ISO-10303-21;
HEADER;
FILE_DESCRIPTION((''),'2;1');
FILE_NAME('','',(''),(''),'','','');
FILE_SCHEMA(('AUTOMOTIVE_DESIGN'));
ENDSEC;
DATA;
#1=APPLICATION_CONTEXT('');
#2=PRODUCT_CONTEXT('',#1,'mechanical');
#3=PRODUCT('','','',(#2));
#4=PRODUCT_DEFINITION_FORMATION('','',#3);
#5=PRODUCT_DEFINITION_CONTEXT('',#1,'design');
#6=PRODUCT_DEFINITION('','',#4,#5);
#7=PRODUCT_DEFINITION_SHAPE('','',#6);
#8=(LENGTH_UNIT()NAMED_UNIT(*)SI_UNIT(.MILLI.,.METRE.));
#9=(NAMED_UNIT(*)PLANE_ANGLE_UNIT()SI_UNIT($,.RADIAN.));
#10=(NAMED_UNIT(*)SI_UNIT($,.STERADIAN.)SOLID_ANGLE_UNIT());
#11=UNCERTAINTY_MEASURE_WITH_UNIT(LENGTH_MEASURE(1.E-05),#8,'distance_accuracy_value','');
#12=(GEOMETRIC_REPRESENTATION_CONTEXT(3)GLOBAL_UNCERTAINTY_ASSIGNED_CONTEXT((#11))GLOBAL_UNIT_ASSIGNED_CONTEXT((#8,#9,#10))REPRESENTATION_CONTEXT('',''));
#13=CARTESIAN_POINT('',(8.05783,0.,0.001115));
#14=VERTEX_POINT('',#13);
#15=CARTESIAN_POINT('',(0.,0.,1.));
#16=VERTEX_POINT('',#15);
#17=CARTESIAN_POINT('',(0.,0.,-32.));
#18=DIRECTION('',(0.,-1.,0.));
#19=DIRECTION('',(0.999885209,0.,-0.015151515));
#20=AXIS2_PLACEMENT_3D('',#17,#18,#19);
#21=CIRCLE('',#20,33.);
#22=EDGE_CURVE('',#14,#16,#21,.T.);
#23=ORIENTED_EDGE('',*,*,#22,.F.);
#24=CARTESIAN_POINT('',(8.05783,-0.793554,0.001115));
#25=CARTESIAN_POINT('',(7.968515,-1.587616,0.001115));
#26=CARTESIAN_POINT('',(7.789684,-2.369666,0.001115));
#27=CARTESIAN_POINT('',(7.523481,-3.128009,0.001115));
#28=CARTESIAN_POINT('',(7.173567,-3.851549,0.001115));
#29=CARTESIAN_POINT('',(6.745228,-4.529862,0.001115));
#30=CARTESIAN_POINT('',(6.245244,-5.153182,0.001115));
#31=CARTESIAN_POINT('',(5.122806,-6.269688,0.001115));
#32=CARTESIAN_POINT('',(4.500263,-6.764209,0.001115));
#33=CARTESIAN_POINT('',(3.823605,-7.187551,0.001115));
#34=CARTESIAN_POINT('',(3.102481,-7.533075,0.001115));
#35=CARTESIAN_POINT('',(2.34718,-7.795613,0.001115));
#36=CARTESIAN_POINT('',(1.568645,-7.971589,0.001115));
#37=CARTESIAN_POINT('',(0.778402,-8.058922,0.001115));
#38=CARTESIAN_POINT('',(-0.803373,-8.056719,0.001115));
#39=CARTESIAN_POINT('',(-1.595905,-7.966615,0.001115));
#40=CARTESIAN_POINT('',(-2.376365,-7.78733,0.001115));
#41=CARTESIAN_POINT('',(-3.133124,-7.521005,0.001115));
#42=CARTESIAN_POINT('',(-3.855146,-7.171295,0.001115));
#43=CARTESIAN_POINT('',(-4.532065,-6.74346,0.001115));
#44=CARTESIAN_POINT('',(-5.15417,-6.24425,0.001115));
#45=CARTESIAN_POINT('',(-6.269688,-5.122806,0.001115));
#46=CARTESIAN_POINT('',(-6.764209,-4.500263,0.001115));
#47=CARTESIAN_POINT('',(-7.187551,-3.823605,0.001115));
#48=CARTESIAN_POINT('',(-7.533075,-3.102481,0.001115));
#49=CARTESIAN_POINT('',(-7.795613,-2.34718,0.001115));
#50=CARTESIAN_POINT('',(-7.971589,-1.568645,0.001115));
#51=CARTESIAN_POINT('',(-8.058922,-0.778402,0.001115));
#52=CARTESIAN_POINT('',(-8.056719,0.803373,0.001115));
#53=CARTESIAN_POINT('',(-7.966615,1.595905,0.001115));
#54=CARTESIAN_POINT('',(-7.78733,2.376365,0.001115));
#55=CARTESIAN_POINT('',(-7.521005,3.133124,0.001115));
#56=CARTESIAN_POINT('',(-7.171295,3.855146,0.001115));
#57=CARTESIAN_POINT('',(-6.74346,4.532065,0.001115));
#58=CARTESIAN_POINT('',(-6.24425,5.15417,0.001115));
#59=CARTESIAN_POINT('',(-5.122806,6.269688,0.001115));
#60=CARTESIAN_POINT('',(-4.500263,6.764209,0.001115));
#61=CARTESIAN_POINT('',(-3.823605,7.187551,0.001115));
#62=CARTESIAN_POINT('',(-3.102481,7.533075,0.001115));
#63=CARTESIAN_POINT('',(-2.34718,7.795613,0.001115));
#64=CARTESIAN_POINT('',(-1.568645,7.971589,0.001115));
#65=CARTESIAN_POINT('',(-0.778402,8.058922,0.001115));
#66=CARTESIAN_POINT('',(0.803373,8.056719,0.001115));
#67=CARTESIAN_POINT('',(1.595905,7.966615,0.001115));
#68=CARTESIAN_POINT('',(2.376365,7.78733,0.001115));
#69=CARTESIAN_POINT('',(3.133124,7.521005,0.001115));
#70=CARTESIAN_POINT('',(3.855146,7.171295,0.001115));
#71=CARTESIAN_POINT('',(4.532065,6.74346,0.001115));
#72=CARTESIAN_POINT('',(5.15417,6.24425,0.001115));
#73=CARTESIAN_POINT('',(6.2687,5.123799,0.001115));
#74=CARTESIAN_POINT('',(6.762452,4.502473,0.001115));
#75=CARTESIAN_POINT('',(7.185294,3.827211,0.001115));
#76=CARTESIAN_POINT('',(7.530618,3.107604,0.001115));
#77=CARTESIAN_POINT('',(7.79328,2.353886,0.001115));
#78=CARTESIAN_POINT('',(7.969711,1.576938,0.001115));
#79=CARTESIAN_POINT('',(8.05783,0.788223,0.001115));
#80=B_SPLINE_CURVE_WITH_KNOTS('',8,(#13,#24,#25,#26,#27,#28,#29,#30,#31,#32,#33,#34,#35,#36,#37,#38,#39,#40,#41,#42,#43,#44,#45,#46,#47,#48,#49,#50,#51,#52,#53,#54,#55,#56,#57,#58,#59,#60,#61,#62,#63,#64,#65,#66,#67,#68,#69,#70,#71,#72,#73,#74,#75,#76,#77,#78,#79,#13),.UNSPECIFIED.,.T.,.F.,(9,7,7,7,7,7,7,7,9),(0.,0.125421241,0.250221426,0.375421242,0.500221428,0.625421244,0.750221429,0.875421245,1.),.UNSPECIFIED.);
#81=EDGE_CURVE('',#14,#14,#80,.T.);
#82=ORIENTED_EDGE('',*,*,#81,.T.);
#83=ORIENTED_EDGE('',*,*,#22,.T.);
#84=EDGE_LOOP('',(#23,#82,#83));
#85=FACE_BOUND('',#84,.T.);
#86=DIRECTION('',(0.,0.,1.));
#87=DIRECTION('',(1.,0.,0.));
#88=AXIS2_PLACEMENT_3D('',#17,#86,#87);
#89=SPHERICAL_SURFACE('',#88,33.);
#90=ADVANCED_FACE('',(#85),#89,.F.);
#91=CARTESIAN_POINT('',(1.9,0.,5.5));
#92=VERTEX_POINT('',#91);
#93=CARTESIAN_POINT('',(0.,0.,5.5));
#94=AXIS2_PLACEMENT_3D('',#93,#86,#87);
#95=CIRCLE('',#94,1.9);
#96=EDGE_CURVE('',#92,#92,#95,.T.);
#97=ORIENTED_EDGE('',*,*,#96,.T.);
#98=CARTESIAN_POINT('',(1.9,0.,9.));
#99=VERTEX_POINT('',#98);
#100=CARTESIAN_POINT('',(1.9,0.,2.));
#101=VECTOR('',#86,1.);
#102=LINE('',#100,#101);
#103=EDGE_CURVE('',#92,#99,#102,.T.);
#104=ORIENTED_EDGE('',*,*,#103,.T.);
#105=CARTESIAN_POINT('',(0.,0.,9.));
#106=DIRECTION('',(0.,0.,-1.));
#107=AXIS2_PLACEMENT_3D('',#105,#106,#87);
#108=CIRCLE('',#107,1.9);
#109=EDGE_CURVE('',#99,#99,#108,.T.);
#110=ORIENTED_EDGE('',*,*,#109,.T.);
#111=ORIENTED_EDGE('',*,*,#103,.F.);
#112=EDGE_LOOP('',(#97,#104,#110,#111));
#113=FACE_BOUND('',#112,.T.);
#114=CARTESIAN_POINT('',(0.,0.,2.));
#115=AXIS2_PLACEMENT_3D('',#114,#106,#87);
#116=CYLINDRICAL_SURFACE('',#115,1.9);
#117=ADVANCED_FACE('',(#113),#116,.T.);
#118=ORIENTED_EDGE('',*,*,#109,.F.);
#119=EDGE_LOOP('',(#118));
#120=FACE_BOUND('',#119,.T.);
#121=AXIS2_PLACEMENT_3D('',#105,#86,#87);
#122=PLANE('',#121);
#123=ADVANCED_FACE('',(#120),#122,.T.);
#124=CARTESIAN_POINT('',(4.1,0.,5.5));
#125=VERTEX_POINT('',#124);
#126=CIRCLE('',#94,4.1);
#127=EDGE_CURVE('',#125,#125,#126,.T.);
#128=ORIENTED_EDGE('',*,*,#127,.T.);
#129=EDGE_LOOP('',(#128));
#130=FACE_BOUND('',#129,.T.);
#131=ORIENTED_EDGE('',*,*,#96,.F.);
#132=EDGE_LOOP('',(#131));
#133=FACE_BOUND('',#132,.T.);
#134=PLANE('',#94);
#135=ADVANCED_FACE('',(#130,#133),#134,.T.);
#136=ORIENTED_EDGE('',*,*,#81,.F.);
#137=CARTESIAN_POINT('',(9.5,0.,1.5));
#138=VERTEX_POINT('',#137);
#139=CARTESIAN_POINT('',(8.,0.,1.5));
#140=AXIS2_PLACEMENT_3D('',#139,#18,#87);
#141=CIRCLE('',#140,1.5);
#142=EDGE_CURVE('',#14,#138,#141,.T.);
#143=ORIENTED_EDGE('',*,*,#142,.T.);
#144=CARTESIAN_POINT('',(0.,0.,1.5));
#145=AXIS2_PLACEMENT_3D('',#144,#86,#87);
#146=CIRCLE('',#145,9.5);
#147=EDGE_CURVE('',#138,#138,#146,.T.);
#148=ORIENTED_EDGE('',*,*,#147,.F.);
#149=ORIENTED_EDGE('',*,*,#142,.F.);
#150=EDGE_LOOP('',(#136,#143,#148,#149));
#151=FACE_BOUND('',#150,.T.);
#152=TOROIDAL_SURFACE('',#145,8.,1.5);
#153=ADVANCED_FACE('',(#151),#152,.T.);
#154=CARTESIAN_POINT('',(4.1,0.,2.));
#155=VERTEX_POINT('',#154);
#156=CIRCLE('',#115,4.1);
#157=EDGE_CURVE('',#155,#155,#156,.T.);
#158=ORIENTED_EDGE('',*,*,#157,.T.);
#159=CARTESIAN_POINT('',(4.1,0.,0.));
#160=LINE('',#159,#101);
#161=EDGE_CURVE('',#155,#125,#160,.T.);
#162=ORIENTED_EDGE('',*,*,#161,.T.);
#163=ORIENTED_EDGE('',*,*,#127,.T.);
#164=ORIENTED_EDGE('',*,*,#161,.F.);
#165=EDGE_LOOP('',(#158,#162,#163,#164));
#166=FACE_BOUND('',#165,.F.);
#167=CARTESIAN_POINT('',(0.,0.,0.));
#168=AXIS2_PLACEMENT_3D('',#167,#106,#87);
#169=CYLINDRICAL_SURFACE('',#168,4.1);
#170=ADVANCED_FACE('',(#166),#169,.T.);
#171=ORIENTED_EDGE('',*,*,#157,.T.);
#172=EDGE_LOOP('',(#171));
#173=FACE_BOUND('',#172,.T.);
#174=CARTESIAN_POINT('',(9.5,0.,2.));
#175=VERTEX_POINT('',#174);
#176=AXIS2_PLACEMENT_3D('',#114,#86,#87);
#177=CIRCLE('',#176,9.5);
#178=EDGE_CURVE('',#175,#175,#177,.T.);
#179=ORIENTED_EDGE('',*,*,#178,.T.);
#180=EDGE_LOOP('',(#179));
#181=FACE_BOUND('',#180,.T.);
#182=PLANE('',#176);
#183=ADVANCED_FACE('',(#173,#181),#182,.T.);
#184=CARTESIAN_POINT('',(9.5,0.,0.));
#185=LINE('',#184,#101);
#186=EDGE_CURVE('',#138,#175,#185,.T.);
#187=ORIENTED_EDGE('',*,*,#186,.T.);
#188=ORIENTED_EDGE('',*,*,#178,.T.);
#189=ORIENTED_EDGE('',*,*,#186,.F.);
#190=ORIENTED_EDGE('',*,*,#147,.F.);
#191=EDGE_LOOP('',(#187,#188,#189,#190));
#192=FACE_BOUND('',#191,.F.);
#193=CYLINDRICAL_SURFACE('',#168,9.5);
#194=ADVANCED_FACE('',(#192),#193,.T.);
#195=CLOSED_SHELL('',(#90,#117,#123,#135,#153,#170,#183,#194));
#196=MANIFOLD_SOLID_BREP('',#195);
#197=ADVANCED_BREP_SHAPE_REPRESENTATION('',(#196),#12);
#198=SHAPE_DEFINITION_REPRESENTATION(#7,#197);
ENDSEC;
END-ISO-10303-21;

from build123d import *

# Parameters (mm, degrees)
F0_R     = 9.5
F0_R_2   = 4.1
F0_R_3   = 1.9
F1_DEPTH = 2
F2_R     = 4.1
F2_R_2   = 1.9
F3_DEPTH = 5.5
F4_R     = 1.5
F7_DEPTH = 7


# Not quite as in the source:
# - a feature names something its author has since deleted; it is built from what else it names


with BuildPart() as f1:
    # F0 (on Top) → F1 (new body)
    with BuildSketch(Plane.XY):
        Circle(F0_R)
        Circle(F0_R_2, mode=Mode.SUBTRACT)
        Circle(F0_R_2)
        Circle(F0_R_3, mode=Mode.SUBTRACT)
        Circle(F0_R_3)
    extrude(amount=F1_DEPTH)

    # F2 (on Top) → F3 (join)
    with BuildSketch(Plane.XY):
        Circle(F2_R)
        Circle(F2_R_2, mode=Mode.SUBTRACT)
    extrude(amount=F3_DEPTH)

    # F4
    f4_edges = [f1.edges().sort_by_distance(p)[0] for p in [
        (-9.5, 0, 0),
    ]]
    fillet(f4_edges, radius=F4_R)

    # F5 (on Front) → F6 (revolve, cut)
    with BuildSketch(Plane.XZ):
        with BuildLine():
            ThreePointArc((0, 0), (23.1570723538, -9.489364109), (32.9962119038, -32.5))
            ThreePointArc((32.9962119038, -32.5), (23.510635891, -8.8429276462), (0, 1))
            Line((0, 1), (0, 0))
        make_face()
    revolve(axis=Axis((0, 0, -31.5146126637), (0, 0, -1)), mode=Mode.SUBTRACT)

    # F7 (add): a face of the model
    f7_faces = [f1.faces().sort_by_distance(p)[0] for p in [
        (0, 0, 2),
    ]]
    extrude(f7_faces, amount=F7_DEPTH)


solid = f1.part
